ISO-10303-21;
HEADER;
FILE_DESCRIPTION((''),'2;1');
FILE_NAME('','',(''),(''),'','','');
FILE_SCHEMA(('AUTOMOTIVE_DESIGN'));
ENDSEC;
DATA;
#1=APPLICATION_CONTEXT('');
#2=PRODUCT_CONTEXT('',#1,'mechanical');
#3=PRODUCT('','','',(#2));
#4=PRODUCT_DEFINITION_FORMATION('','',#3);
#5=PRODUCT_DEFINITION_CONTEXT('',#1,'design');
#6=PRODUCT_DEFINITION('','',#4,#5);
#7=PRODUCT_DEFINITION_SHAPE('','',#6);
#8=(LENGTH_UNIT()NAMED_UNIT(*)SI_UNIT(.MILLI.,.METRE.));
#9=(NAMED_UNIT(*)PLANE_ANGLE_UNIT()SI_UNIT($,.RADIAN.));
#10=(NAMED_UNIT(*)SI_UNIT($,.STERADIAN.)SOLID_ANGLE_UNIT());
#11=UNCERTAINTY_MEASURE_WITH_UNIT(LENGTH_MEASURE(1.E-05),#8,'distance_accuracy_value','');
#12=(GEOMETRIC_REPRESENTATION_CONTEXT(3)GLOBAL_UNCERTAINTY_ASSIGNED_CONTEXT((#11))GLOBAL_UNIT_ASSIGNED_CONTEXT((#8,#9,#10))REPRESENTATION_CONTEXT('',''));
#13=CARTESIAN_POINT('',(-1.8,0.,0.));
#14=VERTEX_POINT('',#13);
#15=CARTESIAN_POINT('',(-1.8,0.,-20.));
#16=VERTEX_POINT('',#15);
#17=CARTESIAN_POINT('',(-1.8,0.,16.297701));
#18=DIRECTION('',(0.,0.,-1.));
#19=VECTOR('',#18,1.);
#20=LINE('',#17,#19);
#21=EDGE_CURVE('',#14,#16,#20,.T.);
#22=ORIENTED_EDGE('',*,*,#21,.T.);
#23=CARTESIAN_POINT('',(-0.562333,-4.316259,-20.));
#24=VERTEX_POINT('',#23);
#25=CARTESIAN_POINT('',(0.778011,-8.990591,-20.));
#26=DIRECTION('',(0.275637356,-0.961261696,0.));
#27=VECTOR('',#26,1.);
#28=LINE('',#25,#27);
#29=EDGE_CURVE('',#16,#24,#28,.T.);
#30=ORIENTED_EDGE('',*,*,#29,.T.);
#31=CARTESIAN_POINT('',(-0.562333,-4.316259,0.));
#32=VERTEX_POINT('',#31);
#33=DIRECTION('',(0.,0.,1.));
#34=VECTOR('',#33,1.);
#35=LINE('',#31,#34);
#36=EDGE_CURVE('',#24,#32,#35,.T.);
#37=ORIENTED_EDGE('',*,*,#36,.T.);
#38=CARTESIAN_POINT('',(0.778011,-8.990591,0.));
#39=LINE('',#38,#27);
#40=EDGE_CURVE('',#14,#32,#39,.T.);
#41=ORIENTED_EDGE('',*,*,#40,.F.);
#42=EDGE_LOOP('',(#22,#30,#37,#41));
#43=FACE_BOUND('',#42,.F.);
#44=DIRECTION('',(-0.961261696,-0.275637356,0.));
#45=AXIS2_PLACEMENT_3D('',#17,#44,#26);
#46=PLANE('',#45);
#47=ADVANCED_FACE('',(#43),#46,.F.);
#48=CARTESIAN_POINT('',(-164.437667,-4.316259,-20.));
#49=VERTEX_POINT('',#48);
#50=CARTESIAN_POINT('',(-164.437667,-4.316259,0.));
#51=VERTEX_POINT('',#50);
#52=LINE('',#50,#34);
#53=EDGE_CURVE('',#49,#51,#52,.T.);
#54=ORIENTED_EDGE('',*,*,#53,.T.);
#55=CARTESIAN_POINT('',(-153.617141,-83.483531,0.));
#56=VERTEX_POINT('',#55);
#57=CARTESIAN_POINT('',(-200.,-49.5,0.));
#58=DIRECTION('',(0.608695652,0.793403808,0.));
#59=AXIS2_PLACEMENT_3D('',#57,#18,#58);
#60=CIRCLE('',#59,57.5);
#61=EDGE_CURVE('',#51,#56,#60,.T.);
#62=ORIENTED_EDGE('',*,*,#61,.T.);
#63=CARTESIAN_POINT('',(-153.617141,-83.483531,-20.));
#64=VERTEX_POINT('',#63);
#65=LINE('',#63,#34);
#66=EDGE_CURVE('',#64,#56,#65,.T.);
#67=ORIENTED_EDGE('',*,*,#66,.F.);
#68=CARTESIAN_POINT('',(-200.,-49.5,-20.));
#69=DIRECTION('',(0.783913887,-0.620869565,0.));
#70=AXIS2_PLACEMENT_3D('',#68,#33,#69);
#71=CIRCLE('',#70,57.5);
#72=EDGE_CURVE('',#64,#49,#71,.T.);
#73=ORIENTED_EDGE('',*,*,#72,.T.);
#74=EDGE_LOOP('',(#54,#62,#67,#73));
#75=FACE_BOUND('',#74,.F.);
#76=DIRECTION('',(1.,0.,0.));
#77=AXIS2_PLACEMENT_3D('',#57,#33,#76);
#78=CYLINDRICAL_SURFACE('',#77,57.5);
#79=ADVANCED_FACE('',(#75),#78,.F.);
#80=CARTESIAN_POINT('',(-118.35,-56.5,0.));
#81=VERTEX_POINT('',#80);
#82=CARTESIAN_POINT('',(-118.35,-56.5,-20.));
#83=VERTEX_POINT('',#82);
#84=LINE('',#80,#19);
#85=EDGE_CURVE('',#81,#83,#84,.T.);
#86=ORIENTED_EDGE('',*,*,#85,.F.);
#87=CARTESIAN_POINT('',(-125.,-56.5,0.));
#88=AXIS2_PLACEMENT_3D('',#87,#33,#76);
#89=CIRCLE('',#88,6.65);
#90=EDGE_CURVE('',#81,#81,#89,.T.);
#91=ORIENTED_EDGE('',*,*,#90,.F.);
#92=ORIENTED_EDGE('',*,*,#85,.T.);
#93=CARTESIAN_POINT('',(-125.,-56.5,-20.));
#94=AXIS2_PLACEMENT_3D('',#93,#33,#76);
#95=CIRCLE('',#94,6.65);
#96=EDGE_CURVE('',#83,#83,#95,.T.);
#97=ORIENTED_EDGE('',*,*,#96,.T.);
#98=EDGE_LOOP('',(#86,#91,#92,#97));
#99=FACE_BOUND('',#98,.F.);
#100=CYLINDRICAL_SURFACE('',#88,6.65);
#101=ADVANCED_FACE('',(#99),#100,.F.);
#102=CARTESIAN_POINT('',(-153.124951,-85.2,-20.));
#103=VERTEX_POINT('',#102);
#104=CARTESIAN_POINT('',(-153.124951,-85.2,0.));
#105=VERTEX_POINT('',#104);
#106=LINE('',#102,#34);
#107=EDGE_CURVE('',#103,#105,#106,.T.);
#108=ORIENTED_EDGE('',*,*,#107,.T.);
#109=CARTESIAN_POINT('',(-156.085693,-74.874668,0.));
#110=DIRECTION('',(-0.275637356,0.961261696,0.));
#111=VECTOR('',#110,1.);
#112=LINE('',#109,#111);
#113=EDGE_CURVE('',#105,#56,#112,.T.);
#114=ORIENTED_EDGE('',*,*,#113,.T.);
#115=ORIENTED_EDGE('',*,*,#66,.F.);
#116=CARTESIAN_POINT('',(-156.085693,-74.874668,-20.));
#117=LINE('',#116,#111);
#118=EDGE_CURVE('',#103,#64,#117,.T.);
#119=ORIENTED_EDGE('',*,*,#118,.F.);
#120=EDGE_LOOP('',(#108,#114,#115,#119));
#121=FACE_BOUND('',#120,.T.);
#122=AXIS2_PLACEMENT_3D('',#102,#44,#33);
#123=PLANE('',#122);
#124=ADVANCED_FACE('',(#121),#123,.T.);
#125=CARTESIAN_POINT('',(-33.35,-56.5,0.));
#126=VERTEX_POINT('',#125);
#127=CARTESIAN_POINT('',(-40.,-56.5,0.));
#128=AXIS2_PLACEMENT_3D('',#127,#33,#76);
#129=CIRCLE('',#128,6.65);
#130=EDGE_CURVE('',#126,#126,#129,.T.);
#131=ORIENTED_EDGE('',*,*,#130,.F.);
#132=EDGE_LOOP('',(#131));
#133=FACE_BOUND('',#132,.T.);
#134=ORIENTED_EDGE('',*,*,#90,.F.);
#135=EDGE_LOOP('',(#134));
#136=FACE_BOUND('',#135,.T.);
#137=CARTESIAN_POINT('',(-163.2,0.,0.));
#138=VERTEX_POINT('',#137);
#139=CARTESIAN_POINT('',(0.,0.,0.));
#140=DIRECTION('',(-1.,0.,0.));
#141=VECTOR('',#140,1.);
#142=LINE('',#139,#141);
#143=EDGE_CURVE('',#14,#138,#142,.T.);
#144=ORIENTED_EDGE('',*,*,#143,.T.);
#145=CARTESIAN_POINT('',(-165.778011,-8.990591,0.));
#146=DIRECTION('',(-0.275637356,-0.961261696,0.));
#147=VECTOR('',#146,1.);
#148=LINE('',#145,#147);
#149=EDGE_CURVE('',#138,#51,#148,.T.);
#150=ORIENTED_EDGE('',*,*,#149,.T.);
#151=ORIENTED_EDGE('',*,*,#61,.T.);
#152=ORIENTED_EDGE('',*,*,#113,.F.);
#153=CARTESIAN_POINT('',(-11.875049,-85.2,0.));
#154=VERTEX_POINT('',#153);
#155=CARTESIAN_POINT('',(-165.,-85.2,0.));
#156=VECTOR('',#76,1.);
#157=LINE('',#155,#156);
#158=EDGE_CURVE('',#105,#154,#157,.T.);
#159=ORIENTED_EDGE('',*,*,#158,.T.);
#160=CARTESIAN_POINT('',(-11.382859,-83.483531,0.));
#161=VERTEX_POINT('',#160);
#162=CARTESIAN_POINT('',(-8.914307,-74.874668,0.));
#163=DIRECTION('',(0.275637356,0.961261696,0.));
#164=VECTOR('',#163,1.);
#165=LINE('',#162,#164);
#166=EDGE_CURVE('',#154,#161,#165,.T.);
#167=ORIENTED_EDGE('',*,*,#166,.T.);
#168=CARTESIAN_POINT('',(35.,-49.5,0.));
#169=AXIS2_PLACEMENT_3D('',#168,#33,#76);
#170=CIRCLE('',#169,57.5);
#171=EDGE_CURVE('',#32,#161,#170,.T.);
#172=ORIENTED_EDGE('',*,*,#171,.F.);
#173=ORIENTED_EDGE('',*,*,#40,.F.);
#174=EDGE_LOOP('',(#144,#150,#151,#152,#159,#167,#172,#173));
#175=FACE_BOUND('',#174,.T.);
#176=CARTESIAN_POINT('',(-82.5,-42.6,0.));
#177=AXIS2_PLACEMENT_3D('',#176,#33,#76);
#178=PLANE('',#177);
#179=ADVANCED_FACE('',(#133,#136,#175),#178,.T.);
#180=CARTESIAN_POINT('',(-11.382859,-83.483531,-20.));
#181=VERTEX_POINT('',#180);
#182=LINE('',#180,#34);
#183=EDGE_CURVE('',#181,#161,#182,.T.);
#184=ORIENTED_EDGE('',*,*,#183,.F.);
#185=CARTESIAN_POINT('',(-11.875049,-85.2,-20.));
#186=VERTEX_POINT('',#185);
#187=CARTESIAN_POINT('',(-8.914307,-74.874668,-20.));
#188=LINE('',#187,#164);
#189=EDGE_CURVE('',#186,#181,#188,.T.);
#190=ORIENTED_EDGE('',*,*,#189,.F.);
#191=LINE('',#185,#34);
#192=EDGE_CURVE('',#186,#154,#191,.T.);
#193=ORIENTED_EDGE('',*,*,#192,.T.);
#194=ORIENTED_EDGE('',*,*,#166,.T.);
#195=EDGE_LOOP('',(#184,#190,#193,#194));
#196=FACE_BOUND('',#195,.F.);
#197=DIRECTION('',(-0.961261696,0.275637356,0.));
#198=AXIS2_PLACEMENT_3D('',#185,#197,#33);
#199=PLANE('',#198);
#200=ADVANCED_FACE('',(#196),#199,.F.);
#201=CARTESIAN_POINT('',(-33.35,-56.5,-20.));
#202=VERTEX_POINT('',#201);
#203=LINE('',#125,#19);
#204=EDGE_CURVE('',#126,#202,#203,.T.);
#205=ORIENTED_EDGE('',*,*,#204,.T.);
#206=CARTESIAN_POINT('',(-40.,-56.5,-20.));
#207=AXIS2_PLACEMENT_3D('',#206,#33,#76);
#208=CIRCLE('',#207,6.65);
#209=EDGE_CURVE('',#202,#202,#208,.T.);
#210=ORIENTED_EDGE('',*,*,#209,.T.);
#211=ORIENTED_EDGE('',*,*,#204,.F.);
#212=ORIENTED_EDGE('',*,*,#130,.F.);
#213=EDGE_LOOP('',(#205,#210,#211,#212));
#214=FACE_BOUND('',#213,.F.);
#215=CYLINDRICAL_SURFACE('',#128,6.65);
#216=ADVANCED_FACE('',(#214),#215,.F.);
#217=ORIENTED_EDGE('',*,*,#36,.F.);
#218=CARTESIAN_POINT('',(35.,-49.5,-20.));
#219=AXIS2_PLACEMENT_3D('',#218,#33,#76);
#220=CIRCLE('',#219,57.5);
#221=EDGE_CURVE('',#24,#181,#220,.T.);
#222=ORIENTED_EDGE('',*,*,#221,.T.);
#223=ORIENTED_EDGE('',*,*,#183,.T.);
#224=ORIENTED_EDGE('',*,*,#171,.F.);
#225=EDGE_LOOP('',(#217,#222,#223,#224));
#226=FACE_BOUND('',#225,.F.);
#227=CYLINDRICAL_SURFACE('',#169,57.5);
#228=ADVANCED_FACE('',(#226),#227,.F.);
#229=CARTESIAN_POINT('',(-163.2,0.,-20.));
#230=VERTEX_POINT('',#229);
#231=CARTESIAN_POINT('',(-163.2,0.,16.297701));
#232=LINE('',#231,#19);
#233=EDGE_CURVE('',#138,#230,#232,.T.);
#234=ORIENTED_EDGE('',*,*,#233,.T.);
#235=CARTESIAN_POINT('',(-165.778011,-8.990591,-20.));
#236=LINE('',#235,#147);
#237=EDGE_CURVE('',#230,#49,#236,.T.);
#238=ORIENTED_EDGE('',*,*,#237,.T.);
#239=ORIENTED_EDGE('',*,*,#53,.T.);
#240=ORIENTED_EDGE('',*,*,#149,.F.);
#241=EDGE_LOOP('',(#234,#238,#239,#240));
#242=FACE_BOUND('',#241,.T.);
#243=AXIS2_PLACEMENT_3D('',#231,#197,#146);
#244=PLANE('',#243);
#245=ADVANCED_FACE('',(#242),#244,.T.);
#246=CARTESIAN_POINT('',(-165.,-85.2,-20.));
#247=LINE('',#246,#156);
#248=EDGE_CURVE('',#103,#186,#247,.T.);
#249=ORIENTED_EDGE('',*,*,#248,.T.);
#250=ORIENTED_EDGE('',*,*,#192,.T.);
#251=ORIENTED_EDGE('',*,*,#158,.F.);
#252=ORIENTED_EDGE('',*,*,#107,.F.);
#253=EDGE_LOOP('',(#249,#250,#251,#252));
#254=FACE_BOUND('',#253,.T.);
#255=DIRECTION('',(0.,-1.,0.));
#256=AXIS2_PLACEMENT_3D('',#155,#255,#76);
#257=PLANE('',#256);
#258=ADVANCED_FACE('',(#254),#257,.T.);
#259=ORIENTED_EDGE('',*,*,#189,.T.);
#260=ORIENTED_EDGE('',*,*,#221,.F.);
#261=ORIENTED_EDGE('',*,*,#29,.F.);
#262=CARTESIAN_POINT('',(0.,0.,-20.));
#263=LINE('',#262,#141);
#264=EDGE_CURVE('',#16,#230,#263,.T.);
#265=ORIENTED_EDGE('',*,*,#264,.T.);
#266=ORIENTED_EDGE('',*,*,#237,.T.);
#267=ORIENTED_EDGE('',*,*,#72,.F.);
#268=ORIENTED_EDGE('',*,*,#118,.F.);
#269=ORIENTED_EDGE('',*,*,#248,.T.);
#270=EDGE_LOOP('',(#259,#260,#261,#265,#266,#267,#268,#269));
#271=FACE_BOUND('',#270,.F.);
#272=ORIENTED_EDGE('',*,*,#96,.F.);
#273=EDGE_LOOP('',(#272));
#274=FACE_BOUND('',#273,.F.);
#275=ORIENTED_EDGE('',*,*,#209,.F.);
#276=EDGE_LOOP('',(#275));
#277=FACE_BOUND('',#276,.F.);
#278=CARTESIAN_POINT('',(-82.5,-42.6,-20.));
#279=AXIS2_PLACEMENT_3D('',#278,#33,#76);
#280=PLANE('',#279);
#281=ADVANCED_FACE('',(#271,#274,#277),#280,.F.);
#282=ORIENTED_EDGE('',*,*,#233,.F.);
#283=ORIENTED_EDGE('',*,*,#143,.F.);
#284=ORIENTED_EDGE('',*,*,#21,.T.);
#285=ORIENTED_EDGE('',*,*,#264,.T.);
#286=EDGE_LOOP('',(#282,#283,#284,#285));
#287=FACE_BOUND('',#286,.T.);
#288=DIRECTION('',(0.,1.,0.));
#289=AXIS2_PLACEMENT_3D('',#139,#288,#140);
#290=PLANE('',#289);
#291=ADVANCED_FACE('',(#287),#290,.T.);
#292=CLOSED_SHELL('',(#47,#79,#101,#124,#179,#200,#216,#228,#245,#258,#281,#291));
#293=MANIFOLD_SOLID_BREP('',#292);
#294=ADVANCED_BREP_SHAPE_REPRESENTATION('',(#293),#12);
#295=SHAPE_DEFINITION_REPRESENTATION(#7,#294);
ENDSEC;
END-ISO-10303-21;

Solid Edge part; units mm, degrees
sketch "Sketch1" plane through (0, 0, 0) normal (0, 0, 1) x (1, 0, 0)
  line L0 (0, 0) -> (-165, 0)
  line L1 (-165, 0) -> (-165, -85.2)
  line L2 (-165, -85.2) -> (0, -85.2)
  line L3 (0, -85.2) -> (0, 0)
extrude "Protrusion1" add sketch "Sketch1" against normal blind 20
sketch "Sketch2" plane through (-82.5, -42.6, 0) normal (0, 0, 1) x (1, 0, 0)
  circle A0 centre (-42.5, -13.9) radius 6.65
  circle A1 centre (42.5, -13.9) radius 6.65
  circle A2 centre (-117.5, -6.9) radius 57.5
  circle A3 centre (117.5, -6.9) radius 57.5
extrude "ExtrudedCutout_1" cut sketch "Sketch2" against normal blind 20
chamfer "Chamfer_2" distance 1.8 angle 74 1 edges at (0, 0, -10) measured on face at (-25.85, 0, -16.4667)
chamfer "Chamfer_3" distance 1.8 angle 74 1 edges at (-165, 0, -10) measured on face at (-27.368, 0, -16.4667)
chamfer "Chamfer_4" distance 1.8 angle 74 1 edges at (-154.925, -85.2, -10) measured on face at (-132.2318, -85.2, -16.4667)
chamfer "Chamfer_5" distance 1.8 angle 74 1 edges at (-10.075, -85.2, -10) measured on face at (-130.7138, -85.2, -16.4667)
